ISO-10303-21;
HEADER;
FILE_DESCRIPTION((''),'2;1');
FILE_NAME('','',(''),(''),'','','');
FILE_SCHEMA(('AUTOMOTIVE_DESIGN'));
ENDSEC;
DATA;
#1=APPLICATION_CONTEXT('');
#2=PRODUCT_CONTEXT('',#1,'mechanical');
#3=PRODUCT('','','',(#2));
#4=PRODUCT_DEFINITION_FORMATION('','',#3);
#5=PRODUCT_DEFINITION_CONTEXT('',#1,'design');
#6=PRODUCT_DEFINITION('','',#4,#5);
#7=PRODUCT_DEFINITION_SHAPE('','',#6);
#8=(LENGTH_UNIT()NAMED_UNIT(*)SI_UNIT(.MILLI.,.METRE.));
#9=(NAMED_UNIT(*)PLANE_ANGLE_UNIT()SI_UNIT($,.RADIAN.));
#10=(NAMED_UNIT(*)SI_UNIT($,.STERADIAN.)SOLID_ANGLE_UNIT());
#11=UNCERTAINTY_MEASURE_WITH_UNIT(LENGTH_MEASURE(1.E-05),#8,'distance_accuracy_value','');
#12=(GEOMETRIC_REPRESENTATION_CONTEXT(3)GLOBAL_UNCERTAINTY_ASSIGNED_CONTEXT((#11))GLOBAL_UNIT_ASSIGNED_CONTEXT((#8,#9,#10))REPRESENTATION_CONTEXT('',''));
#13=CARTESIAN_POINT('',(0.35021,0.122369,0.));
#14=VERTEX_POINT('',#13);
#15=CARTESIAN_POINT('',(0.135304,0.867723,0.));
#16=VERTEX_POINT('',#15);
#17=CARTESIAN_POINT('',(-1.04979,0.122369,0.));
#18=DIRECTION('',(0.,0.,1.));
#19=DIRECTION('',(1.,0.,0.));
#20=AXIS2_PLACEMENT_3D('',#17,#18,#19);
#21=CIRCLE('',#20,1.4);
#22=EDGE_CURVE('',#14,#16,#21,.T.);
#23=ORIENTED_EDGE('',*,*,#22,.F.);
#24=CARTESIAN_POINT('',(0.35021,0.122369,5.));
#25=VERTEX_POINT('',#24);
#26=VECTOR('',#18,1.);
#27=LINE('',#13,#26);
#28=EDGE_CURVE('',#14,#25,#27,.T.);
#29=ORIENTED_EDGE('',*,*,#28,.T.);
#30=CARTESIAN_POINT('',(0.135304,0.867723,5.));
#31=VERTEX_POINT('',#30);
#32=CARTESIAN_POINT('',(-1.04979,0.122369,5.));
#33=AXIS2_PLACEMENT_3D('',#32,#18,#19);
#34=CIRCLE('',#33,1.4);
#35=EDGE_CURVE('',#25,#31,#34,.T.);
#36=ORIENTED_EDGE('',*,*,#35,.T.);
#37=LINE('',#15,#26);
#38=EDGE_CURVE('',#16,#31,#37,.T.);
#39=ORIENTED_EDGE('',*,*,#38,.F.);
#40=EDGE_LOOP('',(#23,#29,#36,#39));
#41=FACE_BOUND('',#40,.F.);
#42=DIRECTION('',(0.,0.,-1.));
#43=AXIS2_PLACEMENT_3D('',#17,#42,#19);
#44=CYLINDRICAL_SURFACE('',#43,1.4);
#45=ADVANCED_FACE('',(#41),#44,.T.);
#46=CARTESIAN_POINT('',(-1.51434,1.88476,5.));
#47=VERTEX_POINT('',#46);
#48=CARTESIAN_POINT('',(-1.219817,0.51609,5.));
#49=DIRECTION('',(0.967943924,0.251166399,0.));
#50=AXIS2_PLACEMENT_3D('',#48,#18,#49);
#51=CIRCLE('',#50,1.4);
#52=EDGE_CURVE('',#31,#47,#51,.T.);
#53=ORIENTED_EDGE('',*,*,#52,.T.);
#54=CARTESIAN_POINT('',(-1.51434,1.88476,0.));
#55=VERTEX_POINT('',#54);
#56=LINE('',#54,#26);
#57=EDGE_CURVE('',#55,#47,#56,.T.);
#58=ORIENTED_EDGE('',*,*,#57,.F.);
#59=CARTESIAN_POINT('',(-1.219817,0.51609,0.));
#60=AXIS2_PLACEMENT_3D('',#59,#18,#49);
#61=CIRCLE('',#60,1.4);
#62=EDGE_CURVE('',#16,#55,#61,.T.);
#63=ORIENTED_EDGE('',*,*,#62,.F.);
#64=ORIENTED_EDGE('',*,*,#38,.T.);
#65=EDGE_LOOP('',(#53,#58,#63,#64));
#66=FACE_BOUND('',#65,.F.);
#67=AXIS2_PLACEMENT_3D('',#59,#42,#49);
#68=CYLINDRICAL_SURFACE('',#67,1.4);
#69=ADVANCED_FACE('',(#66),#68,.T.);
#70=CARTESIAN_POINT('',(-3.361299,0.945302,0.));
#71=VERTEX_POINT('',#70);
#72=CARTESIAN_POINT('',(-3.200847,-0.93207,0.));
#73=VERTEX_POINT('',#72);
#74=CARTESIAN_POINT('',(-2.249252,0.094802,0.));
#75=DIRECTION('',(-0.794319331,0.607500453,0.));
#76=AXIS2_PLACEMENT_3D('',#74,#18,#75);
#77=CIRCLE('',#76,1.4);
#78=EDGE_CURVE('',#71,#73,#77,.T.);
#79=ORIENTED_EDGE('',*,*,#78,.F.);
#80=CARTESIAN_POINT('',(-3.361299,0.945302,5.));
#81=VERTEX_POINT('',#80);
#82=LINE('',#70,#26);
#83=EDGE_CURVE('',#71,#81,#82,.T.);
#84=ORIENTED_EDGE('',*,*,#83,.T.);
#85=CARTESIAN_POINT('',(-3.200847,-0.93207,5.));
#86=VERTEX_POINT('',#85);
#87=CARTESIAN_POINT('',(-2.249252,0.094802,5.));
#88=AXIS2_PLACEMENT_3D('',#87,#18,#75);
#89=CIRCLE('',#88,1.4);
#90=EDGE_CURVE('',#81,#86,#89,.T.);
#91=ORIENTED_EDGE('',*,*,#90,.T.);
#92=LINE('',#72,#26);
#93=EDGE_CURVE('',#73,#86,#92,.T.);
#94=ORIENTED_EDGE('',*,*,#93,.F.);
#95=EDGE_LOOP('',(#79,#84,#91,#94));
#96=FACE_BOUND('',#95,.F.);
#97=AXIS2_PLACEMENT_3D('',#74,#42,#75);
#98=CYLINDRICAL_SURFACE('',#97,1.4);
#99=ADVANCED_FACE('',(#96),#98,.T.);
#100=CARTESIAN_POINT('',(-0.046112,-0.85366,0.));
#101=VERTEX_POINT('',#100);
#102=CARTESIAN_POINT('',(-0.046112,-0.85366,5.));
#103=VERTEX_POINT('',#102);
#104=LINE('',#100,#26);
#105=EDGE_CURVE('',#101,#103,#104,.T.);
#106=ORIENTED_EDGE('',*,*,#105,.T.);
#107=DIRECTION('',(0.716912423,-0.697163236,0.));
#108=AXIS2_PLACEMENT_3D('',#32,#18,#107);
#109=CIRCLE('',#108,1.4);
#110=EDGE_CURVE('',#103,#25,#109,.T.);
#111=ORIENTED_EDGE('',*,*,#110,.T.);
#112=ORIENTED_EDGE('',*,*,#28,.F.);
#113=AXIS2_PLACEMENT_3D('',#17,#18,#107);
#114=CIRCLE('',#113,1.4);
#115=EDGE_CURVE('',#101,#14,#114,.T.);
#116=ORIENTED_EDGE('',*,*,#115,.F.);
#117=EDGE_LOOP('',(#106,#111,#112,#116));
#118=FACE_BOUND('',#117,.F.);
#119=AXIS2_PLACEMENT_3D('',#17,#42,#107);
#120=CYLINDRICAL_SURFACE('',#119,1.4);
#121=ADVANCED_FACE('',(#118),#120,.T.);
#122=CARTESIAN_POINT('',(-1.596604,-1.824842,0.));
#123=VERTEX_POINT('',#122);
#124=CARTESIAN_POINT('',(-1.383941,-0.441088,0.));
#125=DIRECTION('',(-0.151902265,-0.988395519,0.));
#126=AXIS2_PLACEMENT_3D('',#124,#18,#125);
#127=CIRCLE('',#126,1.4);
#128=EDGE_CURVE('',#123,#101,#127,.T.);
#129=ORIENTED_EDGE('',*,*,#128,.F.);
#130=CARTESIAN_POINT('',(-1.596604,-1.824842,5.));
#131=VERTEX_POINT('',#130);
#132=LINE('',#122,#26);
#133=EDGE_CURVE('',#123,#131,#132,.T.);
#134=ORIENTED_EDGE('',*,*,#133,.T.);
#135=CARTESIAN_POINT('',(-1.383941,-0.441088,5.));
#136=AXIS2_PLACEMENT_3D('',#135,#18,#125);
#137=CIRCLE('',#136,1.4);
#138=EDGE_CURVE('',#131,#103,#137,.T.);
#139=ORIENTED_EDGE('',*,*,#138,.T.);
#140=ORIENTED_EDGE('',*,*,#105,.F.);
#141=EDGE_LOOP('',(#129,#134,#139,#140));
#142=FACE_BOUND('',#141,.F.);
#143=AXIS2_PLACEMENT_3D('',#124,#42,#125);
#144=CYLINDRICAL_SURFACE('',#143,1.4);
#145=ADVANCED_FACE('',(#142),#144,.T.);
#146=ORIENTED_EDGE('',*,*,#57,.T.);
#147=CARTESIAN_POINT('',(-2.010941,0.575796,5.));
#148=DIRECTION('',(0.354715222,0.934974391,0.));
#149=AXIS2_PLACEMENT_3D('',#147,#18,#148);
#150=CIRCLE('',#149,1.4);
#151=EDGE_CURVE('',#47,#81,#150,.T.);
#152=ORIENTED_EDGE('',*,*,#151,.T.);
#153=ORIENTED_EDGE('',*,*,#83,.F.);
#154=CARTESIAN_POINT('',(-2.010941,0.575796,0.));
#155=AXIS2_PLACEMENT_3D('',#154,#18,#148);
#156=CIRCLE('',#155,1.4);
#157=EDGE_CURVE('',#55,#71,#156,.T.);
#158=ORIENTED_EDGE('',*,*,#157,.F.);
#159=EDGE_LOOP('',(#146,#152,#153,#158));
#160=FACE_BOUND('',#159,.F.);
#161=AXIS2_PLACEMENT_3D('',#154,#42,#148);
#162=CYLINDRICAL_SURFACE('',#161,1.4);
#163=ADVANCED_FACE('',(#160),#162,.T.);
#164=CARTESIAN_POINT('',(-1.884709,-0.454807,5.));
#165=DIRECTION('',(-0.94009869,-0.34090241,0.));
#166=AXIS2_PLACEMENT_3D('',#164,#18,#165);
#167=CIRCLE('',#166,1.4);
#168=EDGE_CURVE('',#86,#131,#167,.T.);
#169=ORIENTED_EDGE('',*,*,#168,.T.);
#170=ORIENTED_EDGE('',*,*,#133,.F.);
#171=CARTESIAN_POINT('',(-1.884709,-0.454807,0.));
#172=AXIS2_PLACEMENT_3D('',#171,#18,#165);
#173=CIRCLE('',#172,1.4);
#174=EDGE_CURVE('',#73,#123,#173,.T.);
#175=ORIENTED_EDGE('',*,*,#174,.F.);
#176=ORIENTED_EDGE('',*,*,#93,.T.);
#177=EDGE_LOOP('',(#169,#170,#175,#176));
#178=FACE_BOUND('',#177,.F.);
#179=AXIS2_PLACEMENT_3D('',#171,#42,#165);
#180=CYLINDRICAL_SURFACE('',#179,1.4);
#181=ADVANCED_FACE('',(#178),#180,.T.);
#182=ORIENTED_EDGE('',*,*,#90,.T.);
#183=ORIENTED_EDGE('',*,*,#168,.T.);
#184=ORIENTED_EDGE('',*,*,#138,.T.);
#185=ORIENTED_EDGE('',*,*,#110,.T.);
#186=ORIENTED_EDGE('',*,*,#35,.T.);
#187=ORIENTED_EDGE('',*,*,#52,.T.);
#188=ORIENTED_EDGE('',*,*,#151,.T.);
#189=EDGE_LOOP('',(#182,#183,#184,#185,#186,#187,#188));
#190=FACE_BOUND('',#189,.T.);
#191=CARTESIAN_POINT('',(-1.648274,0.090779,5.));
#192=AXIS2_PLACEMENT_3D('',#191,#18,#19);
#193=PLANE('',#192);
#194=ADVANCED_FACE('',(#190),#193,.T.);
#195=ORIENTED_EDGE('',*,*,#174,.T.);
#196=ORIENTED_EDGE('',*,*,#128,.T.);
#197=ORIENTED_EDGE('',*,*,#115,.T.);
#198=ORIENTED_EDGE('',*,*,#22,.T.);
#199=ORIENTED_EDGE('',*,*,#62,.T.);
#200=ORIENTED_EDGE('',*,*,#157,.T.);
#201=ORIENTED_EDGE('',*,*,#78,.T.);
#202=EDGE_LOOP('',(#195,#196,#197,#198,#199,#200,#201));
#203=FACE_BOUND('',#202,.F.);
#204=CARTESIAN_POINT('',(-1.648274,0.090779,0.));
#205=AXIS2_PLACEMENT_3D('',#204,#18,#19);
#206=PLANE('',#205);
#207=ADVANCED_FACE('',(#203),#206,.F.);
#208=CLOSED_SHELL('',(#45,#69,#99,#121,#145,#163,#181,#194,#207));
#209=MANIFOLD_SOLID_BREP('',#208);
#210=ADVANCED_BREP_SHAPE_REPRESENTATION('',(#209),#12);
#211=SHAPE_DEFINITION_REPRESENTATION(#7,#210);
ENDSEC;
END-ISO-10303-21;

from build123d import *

# Parameters (mm, degrees)
F1_DEPTH = 5


with BuildPart() as f1:
    # F0 (on Top) → F1 (new body)
    with BuildSketch(Plane.XY):
        with BuildLine():
            ThreePointArc((-0.8988943353, -0.2747050753), (-0.8617178067, -0.0916116385), (-0.8492516278, 0.0948015993))
            ThreePointArc((-0.8492516278, 0.0948015993), (-0.8703764644, 0.3370892048), (-0.9331134618, 0.5720649731))
            ThreePointArc((-0.9331134618, 0.5720649731), (-1.2758447362, 0.8058613037), (-1.6720459361, 0.9289468827))
            ThreePointArc((-1.6720459361, 0.9289468827), (-2.0592079143, 0.785294631), (-2.3876180715, 0.5349406108))
            ThreePointArc((-2.3876180715, 0.5349406108), (-2.4494314254, 0.1540414271), (-2.4049112303, -0.2292639747))
            ThreePointArc((-2.4049112303, -0.2292639747), (-2.1066312225, -0.5672202335), (-1.7164187622, -0.7928740206))
            ThreePointArc((-1.7164187622, -0.7928740206), (-1.2614520098, -0.6066872767), (-0.8988943353, -0.2747050753))
        make_face()
        with BuildLine():
            ThreePointArc((-0.9331134618, 0.5720649731), (-0.8703764644, 0.3370892048), (-0.8492516278, 0.0948015993))
            ThreePointArc((-0.8492516278, 0.0948015993), (-0.8617178067, -0.0916116385), (-0.8988943353, -0.2747050753))
            ThreePointArc((-0.8988943353, -0.2747050753), (-0.7536616022, -0.0400351914), (-0.6572847743, 0.2185649019))
            ThreePointArc((-0.6572847743, 0.2185649019), (-0.7809552435, 0.4064291339), (-0.9331134618, 0.5720649731))
        make_face()
        with BuildLine():
            ThreePointArc((-1.6720459361, 0.9289468827), (-1.2758447362, 0.8058613037), (-0.9331134618, 0.5720649731))
            ThreePointArc((-0.9331134618, 0.5720649731), (-1.0180125198, 0.7611725612), (-1.1299043154, 0.9356711457))
            ThreePointArc((-1.1299043154, 0.9356711457), (-1.401303752, 0.9588044056), (-1.6720459361, 0.9289468827))
        make_face()
        with BuildLine():
            ThreePointArc((-1.1299043154, 0.9356711457), (-1.0180125198, 0.7611725612), (-0.9331134618, 0.5720649731))
            ThreePointArc((-0.9331134618, 0.5720649731), (-0.7809552435, 0.4064291339), (-0.6572847743, 0.2185649019))
            ThreePointArc((-0.6572847743, 0.2185649019), (-0.6225755838, 0.3956834749), (-0.6109413992, 0.5757955583))
            ThreePointArc((-0.6109413992, 0.5757955583), (-0.6131255758, 0.653967956), (-0.6196712903, 0.7318964362))
            ThreePointArc((-0.6196712903, 0.7318964362), (-0.8646934504, 0.8590591156), (-1.1299043154, 0.9356711457))
        make_face()
        with BuildLine():
            ThreePointArc((-0.6572847743, 0.2185649019), (-0.7536616022, -0.0400351914), (-0.8988943353, -0.2747050753))
            ThreePointArc((-0.8988943353, -0.2747050753), (-1.0346269029, -0.6013928976), (-1.2479146616, -0.8836278975))
            ThreePointArc((-1.2479146616, -0.8836278975), (-0.8622582937, -0.8374797639), (-0.5041231237, -0.6871478501))
            ThreePointArc((-0.5041231237, -0.6871478501), (-0.4895710534, -0.5713821921), (-0.4847091068, -0.4548068438))
            ThreePointArc((-0.4847091068, -0.4548068438), (-0.5285391201, -0.1072396313), (-0.6572847743, 0.2185649019))
        make_face()
        with BuildLine():
            ThreePointArc((-1.2479146616, -0.8836278975), (-1.0346269029, -0.6013928976), (-0.8988943353, -0.2747050753))
            ThreePointArc((-0.8988943353, -0.2747050753), (-1.2614520098, -0.6066872767), (-1.7164187622, -0.7928740206))
            ThreePointArc((-1.7164187622, -0.7928740206), (-1.4860620777, -0.858360236), (-1.2479146616, -0.8836278975))
        make_face()
        with BuildLine():
            ThreePointArc((-1.6720459361, 0.9289468827), (-1.401303752, 0.9588044056), (-1.1299043154, 0.9356711457))
            ThreePointArc((-1.1299043154, 0.9356711457), (-1.3763843902, 1.1893804158), (-1.678585825, 1.3732148899))
            ThreePointArc((-1.678585825, 1.3732148899), (-1.9737758003, 1.174153066), (-2.2092071036, 0.907067251))
            ThreePointArc((-2.2092071036, 0.907067251), (-1.9416866169, 0.944033234), (-1.6720459361, 0.9289468827))
        make_face()
        with BuildLine():
            ThreePointArc((-1.678585825, 1.3732148899), (-1.3763843902, 1.1893804158), (-1.1299043154, 0.9356711457))
            ThreePointArc((-1.1299043154, 0.9356711457), (-0.8646934504, 0.8590591156), (-0.6196712903, 0.7318964362))
            ThreePointArc((-0.6196712903, 0.7318964362), (-0.7361879783, 1.1545906135), (-0.9777387946, 1.5205137056))
            ThreePointArc((-0.9777387946, 1.5205137056), (-1.3377402962, 1.4924363094), (-1.678585825, 1.3732148899))
        make_face()
        with BuildLine():
            ThreePointArc((-0.6109413992, 0.5757955583), (-0.6225755838, 0.3956834749), (-0.6572847743, 0.2185649019))
            ThreePointArc((-0.6572847743, 0.2185649019), (-0.5285391201, -0.1072396313), (-0.4847091068, -0.4548068438))
            ThreePointArc((-0.4847091068, -0.4548068438), (-0.4895710534, -0.5713821921), (-0.5041231237, -0.6871478501))
            ThreePointArc((-0.5041231237, -0.6871478501), (-0.2236607638, -0.4676130058), (-0.0076714351, -0.1844111467))
            ThreePointArc((-0.0076714351, -0.1844111467), (-0.2197322329, 0.3364843866), (-0.6196712903, 0.7318964362))
            ThreePointArc((-0.6196712903, 0.7318964362), (-0.6131255758, 0.653967956), (-0.6109413992, 0.5757955583))
        make_face()
        with BuildLine():
            ThreePointArc((-2.3876180715, 0.5349406108), (-2.0592079143, 0.785294631), (-1.6720459361, 0.9289468827))
            ThreePointArc((-1.6720459361, 0.9289468827), (-1.9416866169, 0.944033234), (-2.2092071036, 0.907067251))
            ThreePointArc((-2.2092071036, 0.907067251), (-2.3121995682, 0.727613908), (-2.3876180715, 0.5349406108))
        make_face()
        with BuildLine():
            ThreePointArc((-0.5041231237, -0.6871478501), (-0.8622582937, -0.8374797639), (-1.2479146616, -0.8836278975))
            ThreePointArc((-1.2479146616, -0.8836278975), (-1.4228823891, -1.0352930345), (-1.6204555397, -1.1560443063))
            ThreePointArc((-1.6204555397, -1.1560443063), (-1.1797554002, -1.2715854362), (-0.7252917401, -1.2395051105))
            ThreePointArc((-0.7252917401, -1.2395051105), (-0.5850249567, -0.9752115997), (-0.5041231237, -0.6871478501))
        make_face()
        with BuildLine():
            ThreePointArc((-1.6204555397, -1.1560443063), (-1.4228823891, -1.0352930345), (-1.2479146616, -0.8836278975))
            ThreePointArc((-1.2479146616, -0.8836278975), (-1.4860620777, -0.858360236), (-1.7164187622, -0.7928740206))
            ThreePointArc((-1.7164187622, -0.7928740206), (-1.8987335129, -0.8197005507), (-2.0829923414, -0.822349163))
            ThreePointArc((-2.0829923414, -0.822349163), (-1.8688969211, -1.013000304), (-1.6204555397, -1.1560443063))
        make_face()
        with BuildLine():
            ThreePointArc((-2.0829923414, -0.822349163), (-1.8987335129, -0.8197005507), (-1.7164187622, -0.7928740206))
            ThreePointArc((-1.7164187622, -0.7928740206), (-2.1066312225, -0.5672202335), (-2.4049112303, -0.2292639747))
            ThreePointArc((-2.4049112303, -0.2292639747), (-2.2802207628, -0.5454928955), (-2.0829923414, -0.822349163))
        make_face()
        with BuildLine():
            ThreePointArc((-2.2092071036, 0.907067251), (-1.9737758003, 1.174153066), (-1.678585825, 1.3732148899))
            ThreePointArc((-1.678585825, 1.3732148899), (-1.9437880524, 1.461070974), (-2.2211544181, 1.4945196233))
            ThreePointArc((-2.2211544181, 1.4945196233), (-2.4678363793, 1.1504786171), (-2.600403435, 0.7484311329))
            ThreePointArc((-2.600403435, 0.7484311329), (-2.4108187653, 0.8425784603), (-2.2092071036, 0.907067251))
        make_face()
        with BuildLine():
            ThreePointArc((-2.2211544181, 1.4945196233), (-1.9437880524, 1.461070974), (-1.678585825, 1.3732148899))
            ThreePointArc((-1.678585825, 1.3732148899), (-1.3377402962, 1.4924363094), (-0.9777387946, 1.5205137056))
            ThreePointArc((-0.9777387946, 1.5205137056), (-1.2246565961, 1.7341375667), (-1.5143400889, 1.8847597055))
            ThreePointArc((-1.5143400889, 1.8847597055), (-1.8964893504, 1.7416981968), (-2.2211544181, 1.4945196233))
        make_face()
        with BuildLine():
            ThreePointArc((-0.9777387946, 1.5205137056), (-0.7361879783, 1.1545906135), (-0.6196712903, 0.7318964362))
            ThreePointArc((-0.6196712903, 0.7318964362), (-0.2197322329, 0.3364843866), (-0.0076714351, -0.1844111467))
            ThreePointArc((-0.0076714351, -0.1844111467), (0.1324037622, 0.153463889), (0.1801825481, 0.5160901266))
            ThreePointArc((0.1801825481, 0.5160901266), (0.1689176004, 0.6933327697), (0.1353040416, 0.8677230856))
            ThreePointArc((0.1353040416, 0.8677230856), (-0.3415262897, 1.3299959505), (-0.9777387946, 1.5205137056))
        make_face()
        with BuildLine():
            ThreePointArc((-2.3876180715, 0.5349406108), (-2.3121995682, 0.727613908), (-2.2092071036, 0.907067251))
            ThreePointArc((-2.2092071036, 0.907067251), (-2.4108187653, 0.8425784603), (-2.600403435, 0.7484311329))
            ThreePointArc((-2.600403435, 0.7484311329), (-2.6197629094, 0.5037322971), (-2.5960866966, 0.2594133531))
            ThreePointArc((-2.5960866966, 0.2594133531), (-2.5003846604, 0.4036326478), (-2.3876180715, 0.5349406108))
        make_face()
        with BuildLine():
            ThreePointArc((-2.4049112303, -0.2292639747), (-2.4494314254, 0.1540414271), (-2.3876180715, 0.5349406108))
            ThreePointArc((-2.3876180715, 0.5349406108), (-2.5003846604, 0.4036326478), (-2.5960866966, 0.2594133531))
            ThreePointArc((-2.5960866966, 0.2594133531), (-2.5235990735, 0.0060376947), (-2.4049112303, -0.2292639747))
        make_face()
        with BuildLine():
            ThreePointArc((-0.7252917401, -1.2395051105), (-1.1797554002, -1.2715854362), (-1.6204555397, -1.1560443063))
            ThreePointArc((-1.6204555397, -1.1560443063), (-2.0515783023, -1.2911728797), (-2.5032879922, -1.2819574666))
            ThreePointArc((-2.5032879922, -1.2819574666), (-2.103137308, -1.642235792), (-1.5966038505, -1.8248416468))
            ThreePointArc((-1.5966038505, -1.8248416468), (-1.1040138069, -1.6169233822), (-0.7252917401, -1.2395051105))
        make_face()
        with BuildLine():
            ThreePointArc((-2.5032879922, -1.2819574666), (-2.0515783023, -1.2911728797), (-1.6204555397, -1.1560443063))
            ThreePointArc((-1.6204555397, -1.1560443063), (-1.8688969211, -1.013000304), (-2.0829923414, -0.822349163))
            ThreePointArc((-2.0829923414, -0.822349163), (-2.443991306, -0.7555450361), (-2.7752107887, -0.5971887981))
            ThreePointArc((-2.7752107887, -0.5971887981), (-2.6851043864, -0.9577822288), (-2.5032879922, -1.2819574666))
        make_face()
        with BuildLine():
            ThreePointArc((-0.0076714351, -0.1844111467), (-0.2236607638, -0.4676130058), (-0.5041231237, -0.6871478501))
            ThreePointArc((-0.5041231237, -0.6871478501), (-0.5850249567, -0.9752115997), (-0.7252917401, -1.2395051105))
            ThreePointArc((-0.7252917401, -1.2395051105), (-0.3582467769, -1.0949100858), (-0.0461123451, -0.8536595467))
            ThreePointArc((-0.0461123451, -0.8536595467), (0.0004291531, -0.6497027944), (0.0160593202, -0.4410879202))
            ThreePointArc((0.0160593202, -0.4410879202), (0.0101140076, -0.3122022007), (-0.0076714351, -0.1844111467))
        make_face()
        with BuildLine():
            ThreePointArc((-2.0829923414, -0.822349163), (-2.2802207628, -0.5454928955), (-2.4049112303, -0.2292639747))
            ThreePointArc((-2.4049112303, -0.2292639747), (-2.5235990735, 0.0060376947), (-2.5960866966, 0.2594133531))
            ThreePointArc((-2.5960866966, 0.2594133531), (-2.7543003743, -0.1545319785), (-2.7752107887, -0.5971887981))
            ThreePointArc((-2.7752107887, -0.5971887981), (-2.443991306, -0.7555450361), (-2.0829923414, -0.822349163))
        make_face()
        with BuildLine():
            ThreePointArc((-2.600403435, 0.7484311329), (-2.4678363793, 1.1504786171), (-2.2211544181, 1.4945196233))
            ThreePointArc((-2.2211544181, 1.4945196233), (-2.8568261147, 1.3560919081), (-3.3612986917, 0.9453022329))
            ThreePointArc((-3.3612986917, 0.9453022329), (-3.4013148657, 0.4119003981), (-3.2383657317, -0.0975761874))
            ThreePointArc((-3.2383657317, -0.0975761874), (-3.0025129529, 0.3881134144), (-2.600403435, 0.7484311329))
        make_face()
        with BuildLine():
            ThreePointArc((-3.3612986917, 0.9453022329), (-2.8568261147, 1.3560919081), (-2.2211544181, 1.4945196233))
            ThreePointArc((-2.2211544181, 1.4945196233), (-1.8964893504, 1.7416981968), (-1.5143400889, 1.8847597055))
            ThreePointArc((-1.5143400889, 1.8847597055), (-2.6456617352, 1.8236457476), (-3.3612986917, 0.9453022329))
        make_face()
        with BuildLine():
            ThreePointArc((-1.5143400889, 1.8847597055), (-1.2246565961, 1.7341375667), (-0.9777387946, 1.5205137056))
            ThreePointArc((-0.9777387946, 1.5205137056), (-0.3415262897, 1.3299959505), (0.1353040416, 0.8677230856))
            ThreePointArc((0.1353040416, 0.8677230856), (-0.4851009384, 1.707808065), (-1.5143400889, 1.8847597055))
        make_face()
        with BuildLine():
            ThreePointArc((0.1801825481, 0.5160901266), (0.1324037622, 0.153463889), (-0.0076714351, -0.1844111467))
            ThreePointArc((-0.0076714351, -0.1844111467), (0.0101140076, -0.3122022007), (0.0160593202, -0.4410879202))
            ThreePointArc((0.0160593202, -0.4410879202), (0.0004291531, -0.6497027944), (-0.0461123451, -0.8536595467))
            ThreePointArc((-0.0461123451, -0.8536595467), (0.247351032, -0.4043432956), (0.3502102632, 0.1223689843))
            ThreePointArc((0.3502102632, 0.1223689843), (0.2954112314, 0.5102276636), (0.1353040416, 0.8677230856))
            ThreePointArc((0.1353040416, 0.8677230856), (0.1689176004, 0.6933327697), (0.1801825481, 0.5160901266))
        make_face()
        with BuildLine():
            ThreePointArc((-2.5960866966, 0.2594133531), (-2.6197629094, 0.5037322971), (-2.600403435, 0.7484311329))
            ThreePointArc((-2.600403435, 0.7484311329), (-3.0025129529, 0.3881134144), (-3.2383657317, -0.0975761874))
            ThreePointArc((-3.2383657317, -0.0975761874), (-3.037642018, -0.3759847941), (-2.7752107887, -0.5971887981))
            ThreePointArc((-2.7752107887, -0.5971887981), (-2.7543003743, -0.1545319785), (-2.5960866966, 0.2594133531))
        make_face()
        with BuildLine():
            ThreePointArc((-1.5966038505, -1.8248416468), (-2.103137308, -1.642235792), (-2.5032879922, -1.2819574666))
            ThreePointArc((-2.5032879922, -1.2819574666), (-2.8769397727, -1.1566006513), (-3.2008472728, -0.9320702176))
            ThreePointArc((-3.2008472728, -0.9320702176), (-2.5654977098, -1.6781329974), (-1.5966038505, -1.8248416468))
        make_face()
        with BuildLine():
            ThreePointArc((-3.2008472728, -0.9320702176), (-2.8769397727, -1.1566006513), (-2.5032879922, -1.2819574666))
            ThreePointArc((-2.5032879922, -1.2819574666), (-2.6851043864, -0.9577822288), (-2.7752107887, -0.5971887981))
            ThreePointArc((-2.7752107887, -0.5971887981), (-3.037642018, -0.3759847941), (-3.2383657317, -0.0975761874))
            ThreePointArc((-3.2383657317, -0.0975761874), (-3.2832962968, -0.5176866657), (-3.2008472728, -0.9320702176))
        make_face()
        with BuildLine():
            ThreePointArc((-0.0461123451, -0.8536595467), (-0.3582467769, -1.0949100858), (-0.7252917401, -1.2395051105))
            ThreePointArc((-0.7252917401, -1.2395051105), (-1.1040138069, -1.6169233822), (-1.5966038505, -1.8248416468))
            ThreePointArc((-1.5966038505, -1.8248416468), (-0.6407732495, -1.6275541737), (-0.0461123451, -0.8536595467))
        make_face()
        with BuildLine():
            ThreePointArc((-3.2383657317, -0.0975761874), (-3.4013148657, 0.4119003981), (-3.3612986917, 0.9453022329))
            ThreePointArc((-3.3612986917, 0.9453022329), (-3.6441663697, -0.0244161134), (-3.2008472728, -0.9320702176))
            ThreePointArc((-3.2008472728, -0.9320702176), (-3.2832962968, -0.5176866657), (-3.2383657317, -0.0975761874))
        make_face()
    extrude(amount=F1_DEPTH)


solid = f1.part
